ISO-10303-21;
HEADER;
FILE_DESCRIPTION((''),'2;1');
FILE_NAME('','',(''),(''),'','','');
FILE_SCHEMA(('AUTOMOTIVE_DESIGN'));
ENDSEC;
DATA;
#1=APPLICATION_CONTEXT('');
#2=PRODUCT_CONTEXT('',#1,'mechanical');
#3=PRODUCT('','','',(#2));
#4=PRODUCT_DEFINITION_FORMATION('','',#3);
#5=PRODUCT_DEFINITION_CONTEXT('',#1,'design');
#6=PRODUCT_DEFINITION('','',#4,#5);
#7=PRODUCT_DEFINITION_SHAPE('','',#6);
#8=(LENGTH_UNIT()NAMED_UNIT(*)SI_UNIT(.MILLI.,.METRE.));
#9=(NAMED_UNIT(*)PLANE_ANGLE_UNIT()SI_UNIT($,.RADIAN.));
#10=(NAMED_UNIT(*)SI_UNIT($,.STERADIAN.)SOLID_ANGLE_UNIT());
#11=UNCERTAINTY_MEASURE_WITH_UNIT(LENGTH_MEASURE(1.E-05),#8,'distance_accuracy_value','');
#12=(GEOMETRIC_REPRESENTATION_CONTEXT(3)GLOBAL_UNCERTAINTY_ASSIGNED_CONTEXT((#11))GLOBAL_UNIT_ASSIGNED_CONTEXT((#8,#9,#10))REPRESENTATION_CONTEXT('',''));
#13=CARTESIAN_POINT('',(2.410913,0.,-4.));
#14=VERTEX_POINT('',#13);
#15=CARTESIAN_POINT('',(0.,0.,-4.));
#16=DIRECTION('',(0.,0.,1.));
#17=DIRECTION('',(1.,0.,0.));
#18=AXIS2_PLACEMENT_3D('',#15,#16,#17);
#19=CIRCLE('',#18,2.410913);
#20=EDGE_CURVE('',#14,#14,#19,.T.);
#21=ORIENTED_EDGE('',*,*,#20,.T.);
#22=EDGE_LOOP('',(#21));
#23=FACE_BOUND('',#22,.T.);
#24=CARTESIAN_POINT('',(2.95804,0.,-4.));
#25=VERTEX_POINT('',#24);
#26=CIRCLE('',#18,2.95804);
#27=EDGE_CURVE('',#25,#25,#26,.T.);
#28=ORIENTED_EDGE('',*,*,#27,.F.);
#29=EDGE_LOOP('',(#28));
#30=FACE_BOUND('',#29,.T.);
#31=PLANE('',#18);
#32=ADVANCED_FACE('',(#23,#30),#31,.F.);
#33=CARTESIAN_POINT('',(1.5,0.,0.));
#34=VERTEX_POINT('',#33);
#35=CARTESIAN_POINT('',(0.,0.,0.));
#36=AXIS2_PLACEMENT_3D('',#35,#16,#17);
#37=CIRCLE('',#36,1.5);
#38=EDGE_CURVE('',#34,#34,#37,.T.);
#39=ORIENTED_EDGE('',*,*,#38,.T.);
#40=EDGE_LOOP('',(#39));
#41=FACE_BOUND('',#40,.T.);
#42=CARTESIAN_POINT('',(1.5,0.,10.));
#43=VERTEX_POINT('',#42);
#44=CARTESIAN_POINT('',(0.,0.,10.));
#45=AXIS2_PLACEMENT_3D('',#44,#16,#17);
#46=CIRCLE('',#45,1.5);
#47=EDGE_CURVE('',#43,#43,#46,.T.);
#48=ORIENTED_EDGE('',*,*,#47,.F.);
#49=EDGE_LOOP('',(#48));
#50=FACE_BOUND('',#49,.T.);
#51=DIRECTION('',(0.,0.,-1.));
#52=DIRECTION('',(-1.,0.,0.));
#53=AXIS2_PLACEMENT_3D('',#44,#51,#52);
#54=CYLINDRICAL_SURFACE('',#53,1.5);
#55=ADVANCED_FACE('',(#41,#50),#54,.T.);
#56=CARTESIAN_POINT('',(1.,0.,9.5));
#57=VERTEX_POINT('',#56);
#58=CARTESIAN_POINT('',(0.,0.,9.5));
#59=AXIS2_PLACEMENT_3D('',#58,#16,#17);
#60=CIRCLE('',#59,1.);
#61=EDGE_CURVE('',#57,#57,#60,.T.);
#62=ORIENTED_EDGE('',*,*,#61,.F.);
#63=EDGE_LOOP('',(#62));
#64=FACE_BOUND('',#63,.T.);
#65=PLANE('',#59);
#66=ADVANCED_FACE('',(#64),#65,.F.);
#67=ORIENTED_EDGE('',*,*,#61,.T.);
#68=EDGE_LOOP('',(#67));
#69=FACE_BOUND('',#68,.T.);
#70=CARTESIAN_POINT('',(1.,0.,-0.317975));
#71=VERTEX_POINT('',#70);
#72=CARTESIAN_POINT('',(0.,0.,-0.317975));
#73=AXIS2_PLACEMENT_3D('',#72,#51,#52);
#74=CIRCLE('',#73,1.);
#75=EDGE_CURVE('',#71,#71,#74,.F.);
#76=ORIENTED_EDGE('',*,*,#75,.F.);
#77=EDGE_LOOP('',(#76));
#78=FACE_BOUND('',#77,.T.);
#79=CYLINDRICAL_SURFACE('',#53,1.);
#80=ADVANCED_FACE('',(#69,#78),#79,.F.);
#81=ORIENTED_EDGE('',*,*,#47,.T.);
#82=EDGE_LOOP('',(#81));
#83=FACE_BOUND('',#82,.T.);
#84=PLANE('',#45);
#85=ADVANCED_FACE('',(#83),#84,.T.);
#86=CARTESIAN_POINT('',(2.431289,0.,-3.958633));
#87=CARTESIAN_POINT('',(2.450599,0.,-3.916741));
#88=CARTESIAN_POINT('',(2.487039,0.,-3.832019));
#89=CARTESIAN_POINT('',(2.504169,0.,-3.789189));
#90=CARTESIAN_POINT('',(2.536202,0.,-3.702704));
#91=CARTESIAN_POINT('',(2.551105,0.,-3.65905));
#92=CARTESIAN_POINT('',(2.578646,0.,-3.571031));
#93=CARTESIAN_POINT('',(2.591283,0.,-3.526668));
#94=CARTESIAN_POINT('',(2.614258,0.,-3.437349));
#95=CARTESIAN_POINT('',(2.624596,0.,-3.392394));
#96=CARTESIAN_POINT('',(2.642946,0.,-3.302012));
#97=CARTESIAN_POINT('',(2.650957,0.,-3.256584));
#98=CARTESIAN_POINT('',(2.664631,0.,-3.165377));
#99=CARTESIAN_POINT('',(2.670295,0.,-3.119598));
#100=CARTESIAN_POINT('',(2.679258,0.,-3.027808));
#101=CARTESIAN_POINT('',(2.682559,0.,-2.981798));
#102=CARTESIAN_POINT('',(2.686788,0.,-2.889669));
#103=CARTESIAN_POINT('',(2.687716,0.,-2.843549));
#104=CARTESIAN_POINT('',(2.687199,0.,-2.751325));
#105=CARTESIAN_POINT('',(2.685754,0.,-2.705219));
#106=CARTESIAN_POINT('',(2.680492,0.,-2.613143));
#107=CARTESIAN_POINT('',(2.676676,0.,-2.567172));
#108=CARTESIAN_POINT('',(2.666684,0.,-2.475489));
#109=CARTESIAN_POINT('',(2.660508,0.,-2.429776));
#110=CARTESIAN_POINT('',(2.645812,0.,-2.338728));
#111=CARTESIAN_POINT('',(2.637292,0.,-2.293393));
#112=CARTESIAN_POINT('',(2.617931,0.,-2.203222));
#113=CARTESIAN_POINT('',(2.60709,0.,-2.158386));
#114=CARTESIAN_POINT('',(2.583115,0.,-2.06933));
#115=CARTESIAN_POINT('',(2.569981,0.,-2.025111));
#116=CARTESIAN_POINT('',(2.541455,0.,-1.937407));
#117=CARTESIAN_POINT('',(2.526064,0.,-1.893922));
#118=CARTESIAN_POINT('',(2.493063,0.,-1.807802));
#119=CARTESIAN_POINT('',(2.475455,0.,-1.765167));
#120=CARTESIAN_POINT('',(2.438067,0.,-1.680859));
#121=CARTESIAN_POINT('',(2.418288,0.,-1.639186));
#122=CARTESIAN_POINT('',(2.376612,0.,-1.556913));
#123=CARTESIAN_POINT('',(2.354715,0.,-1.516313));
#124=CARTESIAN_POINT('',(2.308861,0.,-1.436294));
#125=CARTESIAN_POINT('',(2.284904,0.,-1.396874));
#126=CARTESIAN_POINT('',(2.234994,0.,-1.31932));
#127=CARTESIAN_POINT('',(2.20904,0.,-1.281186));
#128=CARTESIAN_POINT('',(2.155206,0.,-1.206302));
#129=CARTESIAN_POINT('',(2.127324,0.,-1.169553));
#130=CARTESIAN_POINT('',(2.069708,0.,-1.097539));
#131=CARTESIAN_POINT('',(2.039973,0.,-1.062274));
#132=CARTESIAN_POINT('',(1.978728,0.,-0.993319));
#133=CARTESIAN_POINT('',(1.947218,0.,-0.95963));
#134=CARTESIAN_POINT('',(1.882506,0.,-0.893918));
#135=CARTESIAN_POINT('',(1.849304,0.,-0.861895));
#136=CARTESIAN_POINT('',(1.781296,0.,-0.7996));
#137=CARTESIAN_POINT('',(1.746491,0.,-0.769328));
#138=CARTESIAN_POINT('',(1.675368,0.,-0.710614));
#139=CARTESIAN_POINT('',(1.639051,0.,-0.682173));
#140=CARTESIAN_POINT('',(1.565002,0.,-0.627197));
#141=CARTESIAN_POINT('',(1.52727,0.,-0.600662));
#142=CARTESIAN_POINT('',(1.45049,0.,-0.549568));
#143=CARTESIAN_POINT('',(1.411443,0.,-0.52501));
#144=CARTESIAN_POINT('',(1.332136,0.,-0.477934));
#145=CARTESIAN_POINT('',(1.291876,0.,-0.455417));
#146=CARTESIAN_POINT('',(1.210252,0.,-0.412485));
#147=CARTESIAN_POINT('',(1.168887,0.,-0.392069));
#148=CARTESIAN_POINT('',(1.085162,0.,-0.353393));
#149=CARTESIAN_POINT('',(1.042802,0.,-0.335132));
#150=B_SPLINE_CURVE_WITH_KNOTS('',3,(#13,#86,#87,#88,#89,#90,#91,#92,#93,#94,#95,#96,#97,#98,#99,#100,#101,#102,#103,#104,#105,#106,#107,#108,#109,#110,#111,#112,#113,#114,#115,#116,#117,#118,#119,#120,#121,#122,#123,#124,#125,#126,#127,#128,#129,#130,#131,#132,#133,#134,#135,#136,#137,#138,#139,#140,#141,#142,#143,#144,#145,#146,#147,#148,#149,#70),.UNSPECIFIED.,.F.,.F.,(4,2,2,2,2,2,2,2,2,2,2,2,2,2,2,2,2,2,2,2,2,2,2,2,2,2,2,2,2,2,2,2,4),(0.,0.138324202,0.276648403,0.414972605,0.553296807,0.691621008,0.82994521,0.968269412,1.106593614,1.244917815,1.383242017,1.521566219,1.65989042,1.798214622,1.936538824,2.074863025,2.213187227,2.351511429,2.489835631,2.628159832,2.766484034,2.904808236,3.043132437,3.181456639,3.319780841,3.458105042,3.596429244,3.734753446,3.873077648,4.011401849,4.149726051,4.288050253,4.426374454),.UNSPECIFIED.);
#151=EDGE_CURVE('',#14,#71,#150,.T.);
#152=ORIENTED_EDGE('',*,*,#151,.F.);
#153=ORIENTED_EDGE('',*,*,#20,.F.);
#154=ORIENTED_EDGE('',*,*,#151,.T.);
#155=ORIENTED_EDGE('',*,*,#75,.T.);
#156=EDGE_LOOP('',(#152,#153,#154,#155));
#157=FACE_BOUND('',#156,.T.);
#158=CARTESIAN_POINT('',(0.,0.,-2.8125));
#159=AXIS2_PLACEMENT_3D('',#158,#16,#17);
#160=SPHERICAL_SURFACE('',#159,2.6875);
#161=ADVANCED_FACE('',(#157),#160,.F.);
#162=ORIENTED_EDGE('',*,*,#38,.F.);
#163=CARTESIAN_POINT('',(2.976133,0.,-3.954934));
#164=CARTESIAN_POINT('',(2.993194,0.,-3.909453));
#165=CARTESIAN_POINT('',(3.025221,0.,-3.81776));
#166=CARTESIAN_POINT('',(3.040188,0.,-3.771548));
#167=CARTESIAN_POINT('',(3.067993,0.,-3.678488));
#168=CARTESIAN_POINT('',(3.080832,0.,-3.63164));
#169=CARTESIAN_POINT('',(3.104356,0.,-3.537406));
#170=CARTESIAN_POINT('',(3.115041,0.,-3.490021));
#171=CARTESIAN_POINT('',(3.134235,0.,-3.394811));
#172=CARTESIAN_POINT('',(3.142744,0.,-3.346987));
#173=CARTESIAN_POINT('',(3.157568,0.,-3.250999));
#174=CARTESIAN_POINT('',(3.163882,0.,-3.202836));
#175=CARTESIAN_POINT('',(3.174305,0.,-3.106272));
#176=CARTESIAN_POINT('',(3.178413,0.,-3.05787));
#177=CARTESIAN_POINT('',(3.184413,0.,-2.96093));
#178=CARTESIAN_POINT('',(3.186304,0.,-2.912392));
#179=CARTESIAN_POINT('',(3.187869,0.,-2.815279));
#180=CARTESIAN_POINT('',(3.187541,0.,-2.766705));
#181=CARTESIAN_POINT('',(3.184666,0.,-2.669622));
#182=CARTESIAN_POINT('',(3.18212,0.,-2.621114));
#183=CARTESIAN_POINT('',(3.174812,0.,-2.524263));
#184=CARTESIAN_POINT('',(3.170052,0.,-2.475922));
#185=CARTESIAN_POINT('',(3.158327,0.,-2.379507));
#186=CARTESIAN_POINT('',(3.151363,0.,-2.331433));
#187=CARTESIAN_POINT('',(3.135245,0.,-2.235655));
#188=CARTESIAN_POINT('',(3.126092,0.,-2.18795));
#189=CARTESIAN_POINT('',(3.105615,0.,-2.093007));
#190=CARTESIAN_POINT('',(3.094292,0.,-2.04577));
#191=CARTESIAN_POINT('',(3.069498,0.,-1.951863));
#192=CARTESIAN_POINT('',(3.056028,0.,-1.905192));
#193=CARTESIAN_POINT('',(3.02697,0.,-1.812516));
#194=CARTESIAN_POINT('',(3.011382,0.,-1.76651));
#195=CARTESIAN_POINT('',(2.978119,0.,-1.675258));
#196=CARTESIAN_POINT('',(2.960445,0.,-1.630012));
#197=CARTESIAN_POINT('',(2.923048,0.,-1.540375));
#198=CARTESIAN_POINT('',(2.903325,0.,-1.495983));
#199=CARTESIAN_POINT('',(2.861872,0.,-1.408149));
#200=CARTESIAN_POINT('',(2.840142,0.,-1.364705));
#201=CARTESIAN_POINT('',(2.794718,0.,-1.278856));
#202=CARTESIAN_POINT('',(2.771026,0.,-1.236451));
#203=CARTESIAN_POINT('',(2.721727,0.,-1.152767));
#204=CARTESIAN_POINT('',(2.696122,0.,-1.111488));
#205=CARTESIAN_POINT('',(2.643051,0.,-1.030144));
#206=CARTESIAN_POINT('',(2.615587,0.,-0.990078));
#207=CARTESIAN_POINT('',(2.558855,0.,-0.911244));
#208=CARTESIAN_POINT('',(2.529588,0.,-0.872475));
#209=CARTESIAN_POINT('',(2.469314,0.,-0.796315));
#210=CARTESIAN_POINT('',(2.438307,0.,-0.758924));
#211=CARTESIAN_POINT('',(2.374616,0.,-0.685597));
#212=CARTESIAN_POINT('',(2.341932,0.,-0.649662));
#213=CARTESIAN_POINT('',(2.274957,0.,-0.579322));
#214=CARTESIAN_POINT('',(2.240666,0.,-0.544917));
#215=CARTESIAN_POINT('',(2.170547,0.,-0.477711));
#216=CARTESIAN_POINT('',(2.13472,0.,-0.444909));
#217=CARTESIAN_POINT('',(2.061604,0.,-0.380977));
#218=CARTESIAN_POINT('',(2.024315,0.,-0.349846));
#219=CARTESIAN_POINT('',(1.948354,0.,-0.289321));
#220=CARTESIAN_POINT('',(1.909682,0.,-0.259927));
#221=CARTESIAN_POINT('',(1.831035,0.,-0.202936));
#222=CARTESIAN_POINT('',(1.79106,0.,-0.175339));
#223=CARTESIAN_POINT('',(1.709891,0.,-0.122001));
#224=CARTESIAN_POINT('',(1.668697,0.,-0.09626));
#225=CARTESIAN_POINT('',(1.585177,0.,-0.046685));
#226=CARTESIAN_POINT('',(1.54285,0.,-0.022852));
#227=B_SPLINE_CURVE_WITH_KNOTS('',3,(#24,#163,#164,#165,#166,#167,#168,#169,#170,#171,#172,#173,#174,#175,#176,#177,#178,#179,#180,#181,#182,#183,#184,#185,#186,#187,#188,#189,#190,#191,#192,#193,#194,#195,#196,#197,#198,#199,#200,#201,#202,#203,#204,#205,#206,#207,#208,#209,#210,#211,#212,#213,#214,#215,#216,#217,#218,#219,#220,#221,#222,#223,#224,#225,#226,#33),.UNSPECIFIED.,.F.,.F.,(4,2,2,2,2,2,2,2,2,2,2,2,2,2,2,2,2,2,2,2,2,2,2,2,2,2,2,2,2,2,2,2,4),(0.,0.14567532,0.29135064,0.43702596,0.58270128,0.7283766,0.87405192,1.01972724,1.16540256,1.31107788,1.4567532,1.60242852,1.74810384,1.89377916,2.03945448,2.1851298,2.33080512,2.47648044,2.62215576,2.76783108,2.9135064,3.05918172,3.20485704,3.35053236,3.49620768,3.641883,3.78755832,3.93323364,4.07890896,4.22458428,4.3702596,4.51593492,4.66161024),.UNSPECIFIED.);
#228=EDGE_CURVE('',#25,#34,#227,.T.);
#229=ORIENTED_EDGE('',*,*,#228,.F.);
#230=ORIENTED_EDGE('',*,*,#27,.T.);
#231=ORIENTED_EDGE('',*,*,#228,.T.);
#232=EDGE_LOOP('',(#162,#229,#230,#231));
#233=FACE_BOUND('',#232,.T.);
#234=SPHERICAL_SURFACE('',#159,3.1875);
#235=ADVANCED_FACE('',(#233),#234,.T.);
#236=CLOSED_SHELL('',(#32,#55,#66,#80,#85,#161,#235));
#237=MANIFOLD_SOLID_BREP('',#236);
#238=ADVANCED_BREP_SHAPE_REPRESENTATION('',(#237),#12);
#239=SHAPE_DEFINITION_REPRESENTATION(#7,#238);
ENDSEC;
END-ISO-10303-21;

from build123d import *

# Parameters (mm, degrees)
SKETCH1_R           = 1.5
BOSS_EXTRUDE1_DEPTH = 10
SKETCH3_R           = 4
CUT_EXTRUDE2_DEPTH  = 6
SHELL11_T           = -0.5


# Read off the part's stored shape, not the designer's step: Dome1
with BuildPart() as part:
    # Sketch1 → Boss-Extrude1 (new body)
    with BuildSketch(Plane.XY):
        Circle(SKETCH1_R)
    extrude(amount=BOSS_EXTRUDE1_DEPTH)

    # Dome1 outline → Dome1 (revolve)
    with BuildSketch(Plane.XZ):
        with BuildLine():
            Line((0, 2e-09), (0, -6))
            ThreePointArc((0, -6), (3.09232922, -3.585582304), (1.499999999, 1e-09))
            Line((1.499999999, 1e-09), (0, 2e-09))
        make_face()
    revolve(axis=Axis((0, 0, 0), (0, 0, 1)))

    # Sketch3 → Cut-Extrude2 (cut)
    with BuildSketch(Plane.XY.offset(-10)):
        Circle(SKETCH3_R)
    extrude(amount=CUT_EXTRUDE2_DEPTH, mode=Mode.SUBTRACT)

    # Shell11
    shell11_openings = [part.faces().sort_by_distance(p)[0] for p in [
        (1e-09, 0, -4),
    ]]
    offset(amount=SHELL11_T, openings=shell11_openings, kind=Kind.INTERSECTION)


solid = part.part
